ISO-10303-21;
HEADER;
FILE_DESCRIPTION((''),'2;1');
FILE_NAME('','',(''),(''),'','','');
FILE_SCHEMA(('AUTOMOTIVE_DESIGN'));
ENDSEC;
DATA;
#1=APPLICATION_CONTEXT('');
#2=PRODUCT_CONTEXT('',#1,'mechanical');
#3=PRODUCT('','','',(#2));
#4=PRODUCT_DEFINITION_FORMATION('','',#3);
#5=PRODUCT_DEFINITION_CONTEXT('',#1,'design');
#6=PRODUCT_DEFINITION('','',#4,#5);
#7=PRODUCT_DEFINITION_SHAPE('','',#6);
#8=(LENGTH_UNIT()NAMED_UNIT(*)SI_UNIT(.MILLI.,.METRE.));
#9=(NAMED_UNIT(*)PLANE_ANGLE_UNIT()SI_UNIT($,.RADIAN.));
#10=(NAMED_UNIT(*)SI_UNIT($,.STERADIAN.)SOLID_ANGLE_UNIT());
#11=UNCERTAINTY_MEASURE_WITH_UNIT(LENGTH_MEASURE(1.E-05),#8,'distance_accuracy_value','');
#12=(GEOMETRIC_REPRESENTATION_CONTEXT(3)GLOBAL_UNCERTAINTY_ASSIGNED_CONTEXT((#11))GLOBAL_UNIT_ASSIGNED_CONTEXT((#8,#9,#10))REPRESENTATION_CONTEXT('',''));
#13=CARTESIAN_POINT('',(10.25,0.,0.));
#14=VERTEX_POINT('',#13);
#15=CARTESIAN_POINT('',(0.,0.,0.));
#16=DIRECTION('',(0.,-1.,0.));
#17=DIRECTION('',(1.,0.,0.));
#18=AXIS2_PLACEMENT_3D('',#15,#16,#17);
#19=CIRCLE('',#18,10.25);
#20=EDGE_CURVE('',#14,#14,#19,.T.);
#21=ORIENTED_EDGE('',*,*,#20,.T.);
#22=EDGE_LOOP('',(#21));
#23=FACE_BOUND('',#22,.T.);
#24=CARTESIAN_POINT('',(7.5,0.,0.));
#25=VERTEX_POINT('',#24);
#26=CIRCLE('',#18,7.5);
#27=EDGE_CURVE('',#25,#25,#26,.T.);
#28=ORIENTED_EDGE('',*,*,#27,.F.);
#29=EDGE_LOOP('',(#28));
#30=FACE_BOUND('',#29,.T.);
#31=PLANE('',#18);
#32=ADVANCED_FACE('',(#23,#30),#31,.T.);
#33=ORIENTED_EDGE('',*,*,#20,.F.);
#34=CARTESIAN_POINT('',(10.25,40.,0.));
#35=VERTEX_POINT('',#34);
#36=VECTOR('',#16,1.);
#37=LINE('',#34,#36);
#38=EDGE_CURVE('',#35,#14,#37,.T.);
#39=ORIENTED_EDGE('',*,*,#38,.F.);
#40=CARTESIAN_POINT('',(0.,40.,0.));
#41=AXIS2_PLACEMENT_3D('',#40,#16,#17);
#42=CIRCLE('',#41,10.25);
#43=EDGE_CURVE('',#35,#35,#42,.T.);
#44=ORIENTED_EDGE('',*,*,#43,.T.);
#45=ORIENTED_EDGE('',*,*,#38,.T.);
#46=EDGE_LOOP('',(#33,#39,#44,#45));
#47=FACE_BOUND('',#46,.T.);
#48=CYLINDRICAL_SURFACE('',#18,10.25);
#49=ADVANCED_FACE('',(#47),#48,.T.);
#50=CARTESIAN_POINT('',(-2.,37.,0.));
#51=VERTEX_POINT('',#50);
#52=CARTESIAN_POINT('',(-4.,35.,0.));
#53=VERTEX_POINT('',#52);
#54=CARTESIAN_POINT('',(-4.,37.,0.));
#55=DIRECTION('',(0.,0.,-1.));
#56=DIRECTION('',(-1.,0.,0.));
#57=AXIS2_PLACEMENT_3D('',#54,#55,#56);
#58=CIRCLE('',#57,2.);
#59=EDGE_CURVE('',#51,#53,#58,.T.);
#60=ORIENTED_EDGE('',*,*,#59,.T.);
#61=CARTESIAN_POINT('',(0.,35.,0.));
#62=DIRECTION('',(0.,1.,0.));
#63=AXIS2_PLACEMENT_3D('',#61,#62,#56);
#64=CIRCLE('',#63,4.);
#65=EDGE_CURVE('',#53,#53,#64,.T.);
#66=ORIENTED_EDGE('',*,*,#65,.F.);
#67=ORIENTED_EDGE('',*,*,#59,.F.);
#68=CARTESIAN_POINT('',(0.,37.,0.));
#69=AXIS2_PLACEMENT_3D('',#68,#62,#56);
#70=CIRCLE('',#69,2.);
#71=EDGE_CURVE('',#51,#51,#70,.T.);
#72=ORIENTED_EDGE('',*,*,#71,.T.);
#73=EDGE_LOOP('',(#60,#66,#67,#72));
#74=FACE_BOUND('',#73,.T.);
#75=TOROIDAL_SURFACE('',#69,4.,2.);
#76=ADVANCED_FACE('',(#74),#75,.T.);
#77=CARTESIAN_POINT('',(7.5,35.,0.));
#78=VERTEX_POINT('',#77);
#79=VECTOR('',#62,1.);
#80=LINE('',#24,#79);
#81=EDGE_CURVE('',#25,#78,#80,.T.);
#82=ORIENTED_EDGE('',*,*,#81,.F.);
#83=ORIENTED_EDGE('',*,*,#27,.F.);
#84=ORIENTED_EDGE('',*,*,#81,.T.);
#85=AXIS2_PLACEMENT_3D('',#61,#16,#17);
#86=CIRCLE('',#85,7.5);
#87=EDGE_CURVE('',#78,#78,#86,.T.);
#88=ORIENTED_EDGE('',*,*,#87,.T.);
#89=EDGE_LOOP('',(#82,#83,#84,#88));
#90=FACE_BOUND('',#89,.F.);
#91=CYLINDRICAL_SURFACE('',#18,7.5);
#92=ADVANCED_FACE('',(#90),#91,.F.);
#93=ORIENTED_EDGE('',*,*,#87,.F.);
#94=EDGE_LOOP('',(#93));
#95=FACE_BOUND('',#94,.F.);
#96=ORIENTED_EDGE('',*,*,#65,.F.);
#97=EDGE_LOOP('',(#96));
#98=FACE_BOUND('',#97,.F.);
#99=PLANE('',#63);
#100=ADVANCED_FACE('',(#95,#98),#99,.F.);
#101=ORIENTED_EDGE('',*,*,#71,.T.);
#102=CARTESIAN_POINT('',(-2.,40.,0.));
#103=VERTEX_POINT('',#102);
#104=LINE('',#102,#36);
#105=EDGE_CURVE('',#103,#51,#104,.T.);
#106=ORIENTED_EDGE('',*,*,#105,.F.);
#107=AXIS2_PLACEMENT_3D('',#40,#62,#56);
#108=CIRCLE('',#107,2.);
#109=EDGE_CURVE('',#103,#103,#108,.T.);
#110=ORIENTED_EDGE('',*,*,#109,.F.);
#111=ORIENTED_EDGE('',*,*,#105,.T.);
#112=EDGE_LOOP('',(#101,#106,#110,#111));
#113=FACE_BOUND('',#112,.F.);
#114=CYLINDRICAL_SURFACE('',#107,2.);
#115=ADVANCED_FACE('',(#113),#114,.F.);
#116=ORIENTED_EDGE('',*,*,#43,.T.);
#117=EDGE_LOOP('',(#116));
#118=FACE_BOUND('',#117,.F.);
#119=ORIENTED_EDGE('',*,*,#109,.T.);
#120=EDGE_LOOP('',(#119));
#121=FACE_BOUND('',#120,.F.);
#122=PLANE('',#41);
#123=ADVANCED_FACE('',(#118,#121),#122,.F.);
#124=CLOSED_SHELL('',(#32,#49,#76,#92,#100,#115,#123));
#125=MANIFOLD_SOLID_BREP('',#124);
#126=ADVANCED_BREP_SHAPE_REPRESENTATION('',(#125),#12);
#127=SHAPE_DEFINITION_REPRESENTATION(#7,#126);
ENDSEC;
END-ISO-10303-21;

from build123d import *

# Parameters (mm, degrees)
F0_R     = 10.25
F0_R_2   = 7.5
F1_DEPTH = 40
F2_R     = 10.25
F2_R_2   = 7.5
F2_R_3   = 2
F3_DEPTH = 5
F4_R     = 2


with BuildPart() as f1:
    # F0 (on Front) → F1 (new body)
    with BuildSketch(Plane.XZ):
        Circle(F0_R)
        Circle(F0_R_2, mode=Mode.SUBTRACT)
    extrude(amount=-F1_DEPTH)

    # F2 (on face) → F3 (join)
    with BuildSketch(Plane(origin=(0, 40, 0), x_dir=(-1, 0, 0), z_dir=(0, 1, 0))):
        Circle(F2_R)
        Circle(F2_R_2, mode=Mode.SUBTRACT)
        Circle(F2_R_2)
        Circle(F2_R_3, mode=Mode.SUBTRACT)
    extrude(amount=-F3_DEPTH)

    # F4
    f4_edges = [f1.edges().sort_by_distance(p)[0] for p in [
        (2, 35, 0),
    ]]
    fillet(f4_edges, radius=F4_R)


solid = f1.part
